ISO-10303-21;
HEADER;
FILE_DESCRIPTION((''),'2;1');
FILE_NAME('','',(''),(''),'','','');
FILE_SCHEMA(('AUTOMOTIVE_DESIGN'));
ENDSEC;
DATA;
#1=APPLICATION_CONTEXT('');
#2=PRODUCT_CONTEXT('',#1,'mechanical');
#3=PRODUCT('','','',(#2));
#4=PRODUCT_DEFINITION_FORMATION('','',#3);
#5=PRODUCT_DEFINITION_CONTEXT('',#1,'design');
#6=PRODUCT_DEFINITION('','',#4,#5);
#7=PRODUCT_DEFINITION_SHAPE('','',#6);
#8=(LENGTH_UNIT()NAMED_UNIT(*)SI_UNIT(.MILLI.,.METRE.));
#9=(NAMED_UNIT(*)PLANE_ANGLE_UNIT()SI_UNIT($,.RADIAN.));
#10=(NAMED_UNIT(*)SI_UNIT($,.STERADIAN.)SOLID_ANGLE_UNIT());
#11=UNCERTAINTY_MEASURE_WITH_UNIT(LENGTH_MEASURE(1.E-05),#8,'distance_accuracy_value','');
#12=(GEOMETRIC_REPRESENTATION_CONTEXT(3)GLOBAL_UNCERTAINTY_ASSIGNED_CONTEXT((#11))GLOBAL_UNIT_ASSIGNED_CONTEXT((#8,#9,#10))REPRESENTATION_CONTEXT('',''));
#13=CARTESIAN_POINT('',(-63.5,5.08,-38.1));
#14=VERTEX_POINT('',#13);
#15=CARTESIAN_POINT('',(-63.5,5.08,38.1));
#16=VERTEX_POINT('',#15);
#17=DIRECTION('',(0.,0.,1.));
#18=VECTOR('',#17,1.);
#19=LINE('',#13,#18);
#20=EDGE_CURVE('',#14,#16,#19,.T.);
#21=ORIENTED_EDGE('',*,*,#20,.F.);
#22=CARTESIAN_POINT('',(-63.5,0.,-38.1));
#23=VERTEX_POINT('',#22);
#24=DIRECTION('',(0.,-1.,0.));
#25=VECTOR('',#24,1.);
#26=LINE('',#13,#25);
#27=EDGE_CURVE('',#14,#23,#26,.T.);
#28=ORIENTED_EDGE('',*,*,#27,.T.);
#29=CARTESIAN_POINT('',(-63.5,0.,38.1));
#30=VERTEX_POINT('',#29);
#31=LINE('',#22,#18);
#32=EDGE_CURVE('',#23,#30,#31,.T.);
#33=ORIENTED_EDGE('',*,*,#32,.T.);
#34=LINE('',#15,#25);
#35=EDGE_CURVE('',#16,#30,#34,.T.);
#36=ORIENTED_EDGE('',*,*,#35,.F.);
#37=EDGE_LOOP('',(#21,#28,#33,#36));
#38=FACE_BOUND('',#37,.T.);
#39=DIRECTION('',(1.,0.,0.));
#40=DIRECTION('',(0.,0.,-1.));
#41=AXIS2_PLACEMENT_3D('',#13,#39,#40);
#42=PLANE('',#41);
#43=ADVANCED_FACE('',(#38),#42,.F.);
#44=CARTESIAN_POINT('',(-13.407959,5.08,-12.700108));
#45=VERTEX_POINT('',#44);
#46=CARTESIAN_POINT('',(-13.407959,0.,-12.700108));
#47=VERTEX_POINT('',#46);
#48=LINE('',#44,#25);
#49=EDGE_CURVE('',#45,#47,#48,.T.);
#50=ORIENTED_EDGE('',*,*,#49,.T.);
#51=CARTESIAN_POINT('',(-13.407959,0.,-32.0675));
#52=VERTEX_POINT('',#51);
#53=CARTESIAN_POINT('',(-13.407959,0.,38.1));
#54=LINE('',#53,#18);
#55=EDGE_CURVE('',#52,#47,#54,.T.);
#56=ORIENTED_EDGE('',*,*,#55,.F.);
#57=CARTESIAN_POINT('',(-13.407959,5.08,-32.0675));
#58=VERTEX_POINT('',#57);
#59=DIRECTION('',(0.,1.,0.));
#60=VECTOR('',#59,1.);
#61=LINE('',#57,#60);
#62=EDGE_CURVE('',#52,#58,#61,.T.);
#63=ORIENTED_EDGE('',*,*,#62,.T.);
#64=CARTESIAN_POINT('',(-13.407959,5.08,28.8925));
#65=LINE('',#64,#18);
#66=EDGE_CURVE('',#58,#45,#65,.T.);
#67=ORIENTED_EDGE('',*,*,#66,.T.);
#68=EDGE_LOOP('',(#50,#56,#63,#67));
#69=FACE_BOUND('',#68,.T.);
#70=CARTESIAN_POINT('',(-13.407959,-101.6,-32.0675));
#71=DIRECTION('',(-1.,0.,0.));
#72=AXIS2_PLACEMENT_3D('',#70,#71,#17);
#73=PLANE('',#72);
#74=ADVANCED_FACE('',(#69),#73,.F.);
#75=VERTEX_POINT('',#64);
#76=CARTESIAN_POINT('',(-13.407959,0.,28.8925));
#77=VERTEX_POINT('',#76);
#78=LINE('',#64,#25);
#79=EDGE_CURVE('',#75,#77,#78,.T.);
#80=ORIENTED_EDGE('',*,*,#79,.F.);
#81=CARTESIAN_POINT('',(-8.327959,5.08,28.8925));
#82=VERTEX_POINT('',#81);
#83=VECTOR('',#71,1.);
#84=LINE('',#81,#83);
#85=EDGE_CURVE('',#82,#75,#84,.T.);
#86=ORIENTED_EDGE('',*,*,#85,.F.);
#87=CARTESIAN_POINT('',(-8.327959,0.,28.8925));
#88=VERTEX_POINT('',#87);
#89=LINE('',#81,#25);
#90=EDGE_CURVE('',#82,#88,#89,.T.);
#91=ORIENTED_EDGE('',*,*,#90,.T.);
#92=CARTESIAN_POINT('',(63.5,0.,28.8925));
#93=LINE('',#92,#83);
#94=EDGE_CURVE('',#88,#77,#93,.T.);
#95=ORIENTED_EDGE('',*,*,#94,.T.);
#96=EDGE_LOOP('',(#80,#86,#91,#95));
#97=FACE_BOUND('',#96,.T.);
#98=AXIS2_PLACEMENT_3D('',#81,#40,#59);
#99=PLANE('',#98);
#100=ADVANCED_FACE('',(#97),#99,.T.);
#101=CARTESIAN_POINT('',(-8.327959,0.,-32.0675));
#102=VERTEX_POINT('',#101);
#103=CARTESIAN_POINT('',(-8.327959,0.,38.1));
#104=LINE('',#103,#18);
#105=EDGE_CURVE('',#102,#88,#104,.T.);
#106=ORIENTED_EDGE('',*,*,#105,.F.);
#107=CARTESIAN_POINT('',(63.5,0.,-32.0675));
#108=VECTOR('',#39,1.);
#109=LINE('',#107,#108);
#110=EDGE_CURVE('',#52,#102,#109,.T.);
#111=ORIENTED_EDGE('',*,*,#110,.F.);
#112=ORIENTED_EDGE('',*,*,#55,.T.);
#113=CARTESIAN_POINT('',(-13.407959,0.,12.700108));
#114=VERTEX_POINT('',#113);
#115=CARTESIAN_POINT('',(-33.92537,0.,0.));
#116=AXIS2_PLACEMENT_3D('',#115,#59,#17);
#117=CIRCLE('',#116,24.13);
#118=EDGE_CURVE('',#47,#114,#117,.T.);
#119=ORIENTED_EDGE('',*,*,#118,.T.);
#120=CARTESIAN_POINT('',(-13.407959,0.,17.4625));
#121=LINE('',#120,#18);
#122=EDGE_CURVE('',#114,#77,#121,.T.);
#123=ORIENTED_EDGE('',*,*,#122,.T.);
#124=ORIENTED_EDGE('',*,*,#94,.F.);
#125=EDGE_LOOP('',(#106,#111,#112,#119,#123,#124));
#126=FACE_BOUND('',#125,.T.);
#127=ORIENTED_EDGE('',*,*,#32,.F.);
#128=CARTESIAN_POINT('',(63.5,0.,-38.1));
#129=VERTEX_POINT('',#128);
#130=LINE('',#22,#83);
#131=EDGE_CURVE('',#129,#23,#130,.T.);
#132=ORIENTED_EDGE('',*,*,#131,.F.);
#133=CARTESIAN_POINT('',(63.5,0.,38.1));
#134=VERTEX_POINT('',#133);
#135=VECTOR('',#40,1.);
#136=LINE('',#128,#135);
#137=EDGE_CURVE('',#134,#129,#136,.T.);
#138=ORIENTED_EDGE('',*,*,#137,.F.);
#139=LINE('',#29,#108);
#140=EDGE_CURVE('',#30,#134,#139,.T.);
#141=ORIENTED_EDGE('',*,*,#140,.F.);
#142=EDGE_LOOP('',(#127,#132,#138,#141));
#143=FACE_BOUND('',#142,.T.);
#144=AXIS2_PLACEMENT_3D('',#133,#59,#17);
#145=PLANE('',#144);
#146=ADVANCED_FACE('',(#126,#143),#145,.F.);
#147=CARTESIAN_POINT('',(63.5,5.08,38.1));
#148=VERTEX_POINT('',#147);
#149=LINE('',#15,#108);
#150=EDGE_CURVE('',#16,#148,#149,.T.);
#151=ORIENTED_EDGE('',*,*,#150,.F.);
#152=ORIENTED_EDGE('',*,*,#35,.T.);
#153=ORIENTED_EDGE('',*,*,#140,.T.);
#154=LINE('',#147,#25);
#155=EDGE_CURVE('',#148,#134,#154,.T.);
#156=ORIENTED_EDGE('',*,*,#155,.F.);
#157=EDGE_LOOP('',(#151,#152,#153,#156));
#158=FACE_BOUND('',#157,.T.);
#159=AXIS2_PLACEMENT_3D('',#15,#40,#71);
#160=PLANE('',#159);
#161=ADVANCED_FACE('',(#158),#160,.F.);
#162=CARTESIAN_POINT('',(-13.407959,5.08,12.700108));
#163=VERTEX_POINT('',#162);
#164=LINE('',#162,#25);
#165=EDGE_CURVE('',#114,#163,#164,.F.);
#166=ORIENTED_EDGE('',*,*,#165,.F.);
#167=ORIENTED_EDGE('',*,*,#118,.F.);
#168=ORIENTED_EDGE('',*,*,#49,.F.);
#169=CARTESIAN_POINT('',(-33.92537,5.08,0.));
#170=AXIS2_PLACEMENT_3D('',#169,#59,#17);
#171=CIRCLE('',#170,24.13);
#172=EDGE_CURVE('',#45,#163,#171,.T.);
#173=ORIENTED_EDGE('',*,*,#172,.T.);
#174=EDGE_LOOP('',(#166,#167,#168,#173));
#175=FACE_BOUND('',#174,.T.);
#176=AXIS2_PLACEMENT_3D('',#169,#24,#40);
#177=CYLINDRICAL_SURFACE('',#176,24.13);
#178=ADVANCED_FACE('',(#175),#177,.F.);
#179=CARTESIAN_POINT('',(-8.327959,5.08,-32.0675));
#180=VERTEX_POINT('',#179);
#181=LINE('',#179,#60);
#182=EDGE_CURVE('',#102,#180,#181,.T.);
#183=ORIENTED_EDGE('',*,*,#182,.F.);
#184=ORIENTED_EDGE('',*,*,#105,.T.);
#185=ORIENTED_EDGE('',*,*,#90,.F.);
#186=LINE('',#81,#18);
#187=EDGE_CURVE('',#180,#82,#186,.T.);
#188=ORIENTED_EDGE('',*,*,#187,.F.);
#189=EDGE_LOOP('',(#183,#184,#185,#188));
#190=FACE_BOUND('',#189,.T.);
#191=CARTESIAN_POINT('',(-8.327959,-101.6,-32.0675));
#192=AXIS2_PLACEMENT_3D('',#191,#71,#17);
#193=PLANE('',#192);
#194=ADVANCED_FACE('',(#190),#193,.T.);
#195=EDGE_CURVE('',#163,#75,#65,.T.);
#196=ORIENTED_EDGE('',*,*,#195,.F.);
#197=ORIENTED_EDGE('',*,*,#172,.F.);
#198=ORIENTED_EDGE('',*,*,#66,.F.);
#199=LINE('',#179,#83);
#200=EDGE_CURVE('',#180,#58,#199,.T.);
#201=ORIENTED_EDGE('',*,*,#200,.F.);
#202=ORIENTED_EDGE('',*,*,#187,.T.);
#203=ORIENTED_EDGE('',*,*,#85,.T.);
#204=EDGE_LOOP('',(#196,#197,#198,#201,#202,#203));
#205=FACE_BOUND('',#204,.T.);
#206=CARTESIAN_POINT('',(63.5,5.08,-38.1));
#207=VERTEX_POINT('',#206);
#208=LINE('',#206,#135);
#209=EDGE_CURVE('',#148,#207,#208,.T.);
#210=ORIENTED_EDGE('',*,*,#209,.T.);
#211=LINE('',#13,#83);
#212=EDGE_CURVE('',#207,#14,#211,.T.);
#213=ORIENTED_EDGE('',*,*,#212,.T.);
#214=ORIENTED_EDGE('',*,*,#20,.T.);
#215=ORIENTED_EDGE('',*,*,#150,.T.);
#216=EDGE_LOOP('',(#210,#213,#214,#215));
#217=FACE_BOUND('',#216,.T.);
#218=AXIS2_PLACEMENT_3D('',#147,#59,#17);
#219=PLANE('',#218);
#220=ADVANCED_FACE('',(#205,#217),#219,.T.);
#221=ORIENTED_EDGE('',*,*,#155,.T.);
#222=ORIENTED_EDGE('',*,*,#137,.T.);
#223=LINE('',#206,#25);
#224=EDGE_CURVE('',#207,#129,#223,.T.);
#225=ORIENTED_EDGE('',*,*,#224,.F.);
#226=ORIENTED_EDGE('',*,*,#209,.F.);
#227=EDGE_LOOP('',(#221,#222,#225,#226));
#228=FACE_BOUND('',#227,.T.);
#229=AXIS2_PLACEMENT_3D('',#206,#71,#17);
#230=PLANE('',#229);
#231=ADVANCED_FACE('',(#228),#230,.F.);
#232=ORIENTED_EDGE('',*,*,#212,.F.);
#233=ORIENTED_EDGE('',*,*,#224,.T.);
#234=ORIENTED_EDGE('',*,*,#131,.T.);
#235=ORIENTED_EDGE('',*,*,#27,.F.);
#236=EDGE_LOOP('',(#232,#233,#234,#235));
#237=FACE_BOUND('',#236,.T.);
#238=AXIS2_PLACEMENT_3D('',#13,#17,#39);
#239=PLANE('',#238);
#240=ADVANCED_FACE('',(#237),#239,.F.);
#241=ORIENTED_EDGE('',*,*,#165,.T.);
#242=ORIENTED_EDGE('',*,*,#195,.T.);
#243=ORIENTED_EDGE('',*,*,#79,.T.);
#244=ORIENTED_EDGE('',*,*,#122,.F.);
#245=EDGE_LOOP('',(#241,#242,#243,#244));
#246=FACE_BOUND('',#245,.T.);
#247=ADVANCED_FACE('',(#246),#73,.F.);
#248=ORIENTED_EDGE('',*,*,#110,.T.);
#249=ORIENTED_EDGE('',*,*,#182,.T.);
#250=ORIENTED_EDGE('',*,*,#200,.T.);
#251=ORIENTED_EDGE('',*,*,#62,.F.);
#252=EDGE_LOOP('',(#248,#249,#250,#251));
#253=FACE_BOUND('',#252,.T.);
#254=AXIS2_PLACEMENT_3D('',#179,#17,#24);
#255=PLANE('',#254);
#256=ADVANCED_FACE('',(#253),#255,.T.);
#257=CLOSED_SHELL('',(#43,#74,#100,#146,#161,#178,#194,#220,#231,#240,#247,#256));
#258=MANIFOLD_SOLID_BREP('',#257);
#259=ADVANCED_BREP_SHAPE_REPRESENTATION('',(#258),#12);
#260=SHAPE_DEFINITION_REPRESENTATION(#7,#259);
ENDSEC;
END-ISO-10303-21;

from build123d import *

# Parameters (mm, degrees)
SKETCH1_W           = 127
SKETCH1_H           = 76.2
SKETCH1_R           = 24.13
BOSS_EXTRUDE1_DEPTH = 5.08
CAVITY1_START       = -13.407959225
CAVITY1_OUTLINE_W   = 5.08
CAVITY1_OUTLINE_H   = 60.96
CAVITY1_DEPTH       = 5.08


# Read off the part's stored shape, not the designer's step: Cavity1
with BuildPart() as part:
    # Sketch1 → Boss-Extrude1 (new body)
    with BuildSketch(Plane(origin=(0, 0, 0), x_dir=(1, 0, 0), z_dir=(0, 1, 0))):
        Rectangle(SKETCH1_W, SKETCH1_H)
        with Locations(Location((-33.925370199, 0, 0), (0, 0, 270))):
            Circle(SKETCH1_R, mode=Mode.SUBTRACT)
    extrude(amount=BOSS_EXTRUDE1_DEPTH)

    # Cavity1 outline → Cavity1 (cut)
    with BuildSketch(Plane.YZ.offset(CAVITY1_START)):
        with Locations((2.54, -1.5875)):
            Rectangle(CAVITY1_OUTLINE_W, CAVITY1_OUTLINE_H)
    extrude(amount=CAVITY1_DEPTH, mode=Mode.SUBTRACT)


solid = part.part
